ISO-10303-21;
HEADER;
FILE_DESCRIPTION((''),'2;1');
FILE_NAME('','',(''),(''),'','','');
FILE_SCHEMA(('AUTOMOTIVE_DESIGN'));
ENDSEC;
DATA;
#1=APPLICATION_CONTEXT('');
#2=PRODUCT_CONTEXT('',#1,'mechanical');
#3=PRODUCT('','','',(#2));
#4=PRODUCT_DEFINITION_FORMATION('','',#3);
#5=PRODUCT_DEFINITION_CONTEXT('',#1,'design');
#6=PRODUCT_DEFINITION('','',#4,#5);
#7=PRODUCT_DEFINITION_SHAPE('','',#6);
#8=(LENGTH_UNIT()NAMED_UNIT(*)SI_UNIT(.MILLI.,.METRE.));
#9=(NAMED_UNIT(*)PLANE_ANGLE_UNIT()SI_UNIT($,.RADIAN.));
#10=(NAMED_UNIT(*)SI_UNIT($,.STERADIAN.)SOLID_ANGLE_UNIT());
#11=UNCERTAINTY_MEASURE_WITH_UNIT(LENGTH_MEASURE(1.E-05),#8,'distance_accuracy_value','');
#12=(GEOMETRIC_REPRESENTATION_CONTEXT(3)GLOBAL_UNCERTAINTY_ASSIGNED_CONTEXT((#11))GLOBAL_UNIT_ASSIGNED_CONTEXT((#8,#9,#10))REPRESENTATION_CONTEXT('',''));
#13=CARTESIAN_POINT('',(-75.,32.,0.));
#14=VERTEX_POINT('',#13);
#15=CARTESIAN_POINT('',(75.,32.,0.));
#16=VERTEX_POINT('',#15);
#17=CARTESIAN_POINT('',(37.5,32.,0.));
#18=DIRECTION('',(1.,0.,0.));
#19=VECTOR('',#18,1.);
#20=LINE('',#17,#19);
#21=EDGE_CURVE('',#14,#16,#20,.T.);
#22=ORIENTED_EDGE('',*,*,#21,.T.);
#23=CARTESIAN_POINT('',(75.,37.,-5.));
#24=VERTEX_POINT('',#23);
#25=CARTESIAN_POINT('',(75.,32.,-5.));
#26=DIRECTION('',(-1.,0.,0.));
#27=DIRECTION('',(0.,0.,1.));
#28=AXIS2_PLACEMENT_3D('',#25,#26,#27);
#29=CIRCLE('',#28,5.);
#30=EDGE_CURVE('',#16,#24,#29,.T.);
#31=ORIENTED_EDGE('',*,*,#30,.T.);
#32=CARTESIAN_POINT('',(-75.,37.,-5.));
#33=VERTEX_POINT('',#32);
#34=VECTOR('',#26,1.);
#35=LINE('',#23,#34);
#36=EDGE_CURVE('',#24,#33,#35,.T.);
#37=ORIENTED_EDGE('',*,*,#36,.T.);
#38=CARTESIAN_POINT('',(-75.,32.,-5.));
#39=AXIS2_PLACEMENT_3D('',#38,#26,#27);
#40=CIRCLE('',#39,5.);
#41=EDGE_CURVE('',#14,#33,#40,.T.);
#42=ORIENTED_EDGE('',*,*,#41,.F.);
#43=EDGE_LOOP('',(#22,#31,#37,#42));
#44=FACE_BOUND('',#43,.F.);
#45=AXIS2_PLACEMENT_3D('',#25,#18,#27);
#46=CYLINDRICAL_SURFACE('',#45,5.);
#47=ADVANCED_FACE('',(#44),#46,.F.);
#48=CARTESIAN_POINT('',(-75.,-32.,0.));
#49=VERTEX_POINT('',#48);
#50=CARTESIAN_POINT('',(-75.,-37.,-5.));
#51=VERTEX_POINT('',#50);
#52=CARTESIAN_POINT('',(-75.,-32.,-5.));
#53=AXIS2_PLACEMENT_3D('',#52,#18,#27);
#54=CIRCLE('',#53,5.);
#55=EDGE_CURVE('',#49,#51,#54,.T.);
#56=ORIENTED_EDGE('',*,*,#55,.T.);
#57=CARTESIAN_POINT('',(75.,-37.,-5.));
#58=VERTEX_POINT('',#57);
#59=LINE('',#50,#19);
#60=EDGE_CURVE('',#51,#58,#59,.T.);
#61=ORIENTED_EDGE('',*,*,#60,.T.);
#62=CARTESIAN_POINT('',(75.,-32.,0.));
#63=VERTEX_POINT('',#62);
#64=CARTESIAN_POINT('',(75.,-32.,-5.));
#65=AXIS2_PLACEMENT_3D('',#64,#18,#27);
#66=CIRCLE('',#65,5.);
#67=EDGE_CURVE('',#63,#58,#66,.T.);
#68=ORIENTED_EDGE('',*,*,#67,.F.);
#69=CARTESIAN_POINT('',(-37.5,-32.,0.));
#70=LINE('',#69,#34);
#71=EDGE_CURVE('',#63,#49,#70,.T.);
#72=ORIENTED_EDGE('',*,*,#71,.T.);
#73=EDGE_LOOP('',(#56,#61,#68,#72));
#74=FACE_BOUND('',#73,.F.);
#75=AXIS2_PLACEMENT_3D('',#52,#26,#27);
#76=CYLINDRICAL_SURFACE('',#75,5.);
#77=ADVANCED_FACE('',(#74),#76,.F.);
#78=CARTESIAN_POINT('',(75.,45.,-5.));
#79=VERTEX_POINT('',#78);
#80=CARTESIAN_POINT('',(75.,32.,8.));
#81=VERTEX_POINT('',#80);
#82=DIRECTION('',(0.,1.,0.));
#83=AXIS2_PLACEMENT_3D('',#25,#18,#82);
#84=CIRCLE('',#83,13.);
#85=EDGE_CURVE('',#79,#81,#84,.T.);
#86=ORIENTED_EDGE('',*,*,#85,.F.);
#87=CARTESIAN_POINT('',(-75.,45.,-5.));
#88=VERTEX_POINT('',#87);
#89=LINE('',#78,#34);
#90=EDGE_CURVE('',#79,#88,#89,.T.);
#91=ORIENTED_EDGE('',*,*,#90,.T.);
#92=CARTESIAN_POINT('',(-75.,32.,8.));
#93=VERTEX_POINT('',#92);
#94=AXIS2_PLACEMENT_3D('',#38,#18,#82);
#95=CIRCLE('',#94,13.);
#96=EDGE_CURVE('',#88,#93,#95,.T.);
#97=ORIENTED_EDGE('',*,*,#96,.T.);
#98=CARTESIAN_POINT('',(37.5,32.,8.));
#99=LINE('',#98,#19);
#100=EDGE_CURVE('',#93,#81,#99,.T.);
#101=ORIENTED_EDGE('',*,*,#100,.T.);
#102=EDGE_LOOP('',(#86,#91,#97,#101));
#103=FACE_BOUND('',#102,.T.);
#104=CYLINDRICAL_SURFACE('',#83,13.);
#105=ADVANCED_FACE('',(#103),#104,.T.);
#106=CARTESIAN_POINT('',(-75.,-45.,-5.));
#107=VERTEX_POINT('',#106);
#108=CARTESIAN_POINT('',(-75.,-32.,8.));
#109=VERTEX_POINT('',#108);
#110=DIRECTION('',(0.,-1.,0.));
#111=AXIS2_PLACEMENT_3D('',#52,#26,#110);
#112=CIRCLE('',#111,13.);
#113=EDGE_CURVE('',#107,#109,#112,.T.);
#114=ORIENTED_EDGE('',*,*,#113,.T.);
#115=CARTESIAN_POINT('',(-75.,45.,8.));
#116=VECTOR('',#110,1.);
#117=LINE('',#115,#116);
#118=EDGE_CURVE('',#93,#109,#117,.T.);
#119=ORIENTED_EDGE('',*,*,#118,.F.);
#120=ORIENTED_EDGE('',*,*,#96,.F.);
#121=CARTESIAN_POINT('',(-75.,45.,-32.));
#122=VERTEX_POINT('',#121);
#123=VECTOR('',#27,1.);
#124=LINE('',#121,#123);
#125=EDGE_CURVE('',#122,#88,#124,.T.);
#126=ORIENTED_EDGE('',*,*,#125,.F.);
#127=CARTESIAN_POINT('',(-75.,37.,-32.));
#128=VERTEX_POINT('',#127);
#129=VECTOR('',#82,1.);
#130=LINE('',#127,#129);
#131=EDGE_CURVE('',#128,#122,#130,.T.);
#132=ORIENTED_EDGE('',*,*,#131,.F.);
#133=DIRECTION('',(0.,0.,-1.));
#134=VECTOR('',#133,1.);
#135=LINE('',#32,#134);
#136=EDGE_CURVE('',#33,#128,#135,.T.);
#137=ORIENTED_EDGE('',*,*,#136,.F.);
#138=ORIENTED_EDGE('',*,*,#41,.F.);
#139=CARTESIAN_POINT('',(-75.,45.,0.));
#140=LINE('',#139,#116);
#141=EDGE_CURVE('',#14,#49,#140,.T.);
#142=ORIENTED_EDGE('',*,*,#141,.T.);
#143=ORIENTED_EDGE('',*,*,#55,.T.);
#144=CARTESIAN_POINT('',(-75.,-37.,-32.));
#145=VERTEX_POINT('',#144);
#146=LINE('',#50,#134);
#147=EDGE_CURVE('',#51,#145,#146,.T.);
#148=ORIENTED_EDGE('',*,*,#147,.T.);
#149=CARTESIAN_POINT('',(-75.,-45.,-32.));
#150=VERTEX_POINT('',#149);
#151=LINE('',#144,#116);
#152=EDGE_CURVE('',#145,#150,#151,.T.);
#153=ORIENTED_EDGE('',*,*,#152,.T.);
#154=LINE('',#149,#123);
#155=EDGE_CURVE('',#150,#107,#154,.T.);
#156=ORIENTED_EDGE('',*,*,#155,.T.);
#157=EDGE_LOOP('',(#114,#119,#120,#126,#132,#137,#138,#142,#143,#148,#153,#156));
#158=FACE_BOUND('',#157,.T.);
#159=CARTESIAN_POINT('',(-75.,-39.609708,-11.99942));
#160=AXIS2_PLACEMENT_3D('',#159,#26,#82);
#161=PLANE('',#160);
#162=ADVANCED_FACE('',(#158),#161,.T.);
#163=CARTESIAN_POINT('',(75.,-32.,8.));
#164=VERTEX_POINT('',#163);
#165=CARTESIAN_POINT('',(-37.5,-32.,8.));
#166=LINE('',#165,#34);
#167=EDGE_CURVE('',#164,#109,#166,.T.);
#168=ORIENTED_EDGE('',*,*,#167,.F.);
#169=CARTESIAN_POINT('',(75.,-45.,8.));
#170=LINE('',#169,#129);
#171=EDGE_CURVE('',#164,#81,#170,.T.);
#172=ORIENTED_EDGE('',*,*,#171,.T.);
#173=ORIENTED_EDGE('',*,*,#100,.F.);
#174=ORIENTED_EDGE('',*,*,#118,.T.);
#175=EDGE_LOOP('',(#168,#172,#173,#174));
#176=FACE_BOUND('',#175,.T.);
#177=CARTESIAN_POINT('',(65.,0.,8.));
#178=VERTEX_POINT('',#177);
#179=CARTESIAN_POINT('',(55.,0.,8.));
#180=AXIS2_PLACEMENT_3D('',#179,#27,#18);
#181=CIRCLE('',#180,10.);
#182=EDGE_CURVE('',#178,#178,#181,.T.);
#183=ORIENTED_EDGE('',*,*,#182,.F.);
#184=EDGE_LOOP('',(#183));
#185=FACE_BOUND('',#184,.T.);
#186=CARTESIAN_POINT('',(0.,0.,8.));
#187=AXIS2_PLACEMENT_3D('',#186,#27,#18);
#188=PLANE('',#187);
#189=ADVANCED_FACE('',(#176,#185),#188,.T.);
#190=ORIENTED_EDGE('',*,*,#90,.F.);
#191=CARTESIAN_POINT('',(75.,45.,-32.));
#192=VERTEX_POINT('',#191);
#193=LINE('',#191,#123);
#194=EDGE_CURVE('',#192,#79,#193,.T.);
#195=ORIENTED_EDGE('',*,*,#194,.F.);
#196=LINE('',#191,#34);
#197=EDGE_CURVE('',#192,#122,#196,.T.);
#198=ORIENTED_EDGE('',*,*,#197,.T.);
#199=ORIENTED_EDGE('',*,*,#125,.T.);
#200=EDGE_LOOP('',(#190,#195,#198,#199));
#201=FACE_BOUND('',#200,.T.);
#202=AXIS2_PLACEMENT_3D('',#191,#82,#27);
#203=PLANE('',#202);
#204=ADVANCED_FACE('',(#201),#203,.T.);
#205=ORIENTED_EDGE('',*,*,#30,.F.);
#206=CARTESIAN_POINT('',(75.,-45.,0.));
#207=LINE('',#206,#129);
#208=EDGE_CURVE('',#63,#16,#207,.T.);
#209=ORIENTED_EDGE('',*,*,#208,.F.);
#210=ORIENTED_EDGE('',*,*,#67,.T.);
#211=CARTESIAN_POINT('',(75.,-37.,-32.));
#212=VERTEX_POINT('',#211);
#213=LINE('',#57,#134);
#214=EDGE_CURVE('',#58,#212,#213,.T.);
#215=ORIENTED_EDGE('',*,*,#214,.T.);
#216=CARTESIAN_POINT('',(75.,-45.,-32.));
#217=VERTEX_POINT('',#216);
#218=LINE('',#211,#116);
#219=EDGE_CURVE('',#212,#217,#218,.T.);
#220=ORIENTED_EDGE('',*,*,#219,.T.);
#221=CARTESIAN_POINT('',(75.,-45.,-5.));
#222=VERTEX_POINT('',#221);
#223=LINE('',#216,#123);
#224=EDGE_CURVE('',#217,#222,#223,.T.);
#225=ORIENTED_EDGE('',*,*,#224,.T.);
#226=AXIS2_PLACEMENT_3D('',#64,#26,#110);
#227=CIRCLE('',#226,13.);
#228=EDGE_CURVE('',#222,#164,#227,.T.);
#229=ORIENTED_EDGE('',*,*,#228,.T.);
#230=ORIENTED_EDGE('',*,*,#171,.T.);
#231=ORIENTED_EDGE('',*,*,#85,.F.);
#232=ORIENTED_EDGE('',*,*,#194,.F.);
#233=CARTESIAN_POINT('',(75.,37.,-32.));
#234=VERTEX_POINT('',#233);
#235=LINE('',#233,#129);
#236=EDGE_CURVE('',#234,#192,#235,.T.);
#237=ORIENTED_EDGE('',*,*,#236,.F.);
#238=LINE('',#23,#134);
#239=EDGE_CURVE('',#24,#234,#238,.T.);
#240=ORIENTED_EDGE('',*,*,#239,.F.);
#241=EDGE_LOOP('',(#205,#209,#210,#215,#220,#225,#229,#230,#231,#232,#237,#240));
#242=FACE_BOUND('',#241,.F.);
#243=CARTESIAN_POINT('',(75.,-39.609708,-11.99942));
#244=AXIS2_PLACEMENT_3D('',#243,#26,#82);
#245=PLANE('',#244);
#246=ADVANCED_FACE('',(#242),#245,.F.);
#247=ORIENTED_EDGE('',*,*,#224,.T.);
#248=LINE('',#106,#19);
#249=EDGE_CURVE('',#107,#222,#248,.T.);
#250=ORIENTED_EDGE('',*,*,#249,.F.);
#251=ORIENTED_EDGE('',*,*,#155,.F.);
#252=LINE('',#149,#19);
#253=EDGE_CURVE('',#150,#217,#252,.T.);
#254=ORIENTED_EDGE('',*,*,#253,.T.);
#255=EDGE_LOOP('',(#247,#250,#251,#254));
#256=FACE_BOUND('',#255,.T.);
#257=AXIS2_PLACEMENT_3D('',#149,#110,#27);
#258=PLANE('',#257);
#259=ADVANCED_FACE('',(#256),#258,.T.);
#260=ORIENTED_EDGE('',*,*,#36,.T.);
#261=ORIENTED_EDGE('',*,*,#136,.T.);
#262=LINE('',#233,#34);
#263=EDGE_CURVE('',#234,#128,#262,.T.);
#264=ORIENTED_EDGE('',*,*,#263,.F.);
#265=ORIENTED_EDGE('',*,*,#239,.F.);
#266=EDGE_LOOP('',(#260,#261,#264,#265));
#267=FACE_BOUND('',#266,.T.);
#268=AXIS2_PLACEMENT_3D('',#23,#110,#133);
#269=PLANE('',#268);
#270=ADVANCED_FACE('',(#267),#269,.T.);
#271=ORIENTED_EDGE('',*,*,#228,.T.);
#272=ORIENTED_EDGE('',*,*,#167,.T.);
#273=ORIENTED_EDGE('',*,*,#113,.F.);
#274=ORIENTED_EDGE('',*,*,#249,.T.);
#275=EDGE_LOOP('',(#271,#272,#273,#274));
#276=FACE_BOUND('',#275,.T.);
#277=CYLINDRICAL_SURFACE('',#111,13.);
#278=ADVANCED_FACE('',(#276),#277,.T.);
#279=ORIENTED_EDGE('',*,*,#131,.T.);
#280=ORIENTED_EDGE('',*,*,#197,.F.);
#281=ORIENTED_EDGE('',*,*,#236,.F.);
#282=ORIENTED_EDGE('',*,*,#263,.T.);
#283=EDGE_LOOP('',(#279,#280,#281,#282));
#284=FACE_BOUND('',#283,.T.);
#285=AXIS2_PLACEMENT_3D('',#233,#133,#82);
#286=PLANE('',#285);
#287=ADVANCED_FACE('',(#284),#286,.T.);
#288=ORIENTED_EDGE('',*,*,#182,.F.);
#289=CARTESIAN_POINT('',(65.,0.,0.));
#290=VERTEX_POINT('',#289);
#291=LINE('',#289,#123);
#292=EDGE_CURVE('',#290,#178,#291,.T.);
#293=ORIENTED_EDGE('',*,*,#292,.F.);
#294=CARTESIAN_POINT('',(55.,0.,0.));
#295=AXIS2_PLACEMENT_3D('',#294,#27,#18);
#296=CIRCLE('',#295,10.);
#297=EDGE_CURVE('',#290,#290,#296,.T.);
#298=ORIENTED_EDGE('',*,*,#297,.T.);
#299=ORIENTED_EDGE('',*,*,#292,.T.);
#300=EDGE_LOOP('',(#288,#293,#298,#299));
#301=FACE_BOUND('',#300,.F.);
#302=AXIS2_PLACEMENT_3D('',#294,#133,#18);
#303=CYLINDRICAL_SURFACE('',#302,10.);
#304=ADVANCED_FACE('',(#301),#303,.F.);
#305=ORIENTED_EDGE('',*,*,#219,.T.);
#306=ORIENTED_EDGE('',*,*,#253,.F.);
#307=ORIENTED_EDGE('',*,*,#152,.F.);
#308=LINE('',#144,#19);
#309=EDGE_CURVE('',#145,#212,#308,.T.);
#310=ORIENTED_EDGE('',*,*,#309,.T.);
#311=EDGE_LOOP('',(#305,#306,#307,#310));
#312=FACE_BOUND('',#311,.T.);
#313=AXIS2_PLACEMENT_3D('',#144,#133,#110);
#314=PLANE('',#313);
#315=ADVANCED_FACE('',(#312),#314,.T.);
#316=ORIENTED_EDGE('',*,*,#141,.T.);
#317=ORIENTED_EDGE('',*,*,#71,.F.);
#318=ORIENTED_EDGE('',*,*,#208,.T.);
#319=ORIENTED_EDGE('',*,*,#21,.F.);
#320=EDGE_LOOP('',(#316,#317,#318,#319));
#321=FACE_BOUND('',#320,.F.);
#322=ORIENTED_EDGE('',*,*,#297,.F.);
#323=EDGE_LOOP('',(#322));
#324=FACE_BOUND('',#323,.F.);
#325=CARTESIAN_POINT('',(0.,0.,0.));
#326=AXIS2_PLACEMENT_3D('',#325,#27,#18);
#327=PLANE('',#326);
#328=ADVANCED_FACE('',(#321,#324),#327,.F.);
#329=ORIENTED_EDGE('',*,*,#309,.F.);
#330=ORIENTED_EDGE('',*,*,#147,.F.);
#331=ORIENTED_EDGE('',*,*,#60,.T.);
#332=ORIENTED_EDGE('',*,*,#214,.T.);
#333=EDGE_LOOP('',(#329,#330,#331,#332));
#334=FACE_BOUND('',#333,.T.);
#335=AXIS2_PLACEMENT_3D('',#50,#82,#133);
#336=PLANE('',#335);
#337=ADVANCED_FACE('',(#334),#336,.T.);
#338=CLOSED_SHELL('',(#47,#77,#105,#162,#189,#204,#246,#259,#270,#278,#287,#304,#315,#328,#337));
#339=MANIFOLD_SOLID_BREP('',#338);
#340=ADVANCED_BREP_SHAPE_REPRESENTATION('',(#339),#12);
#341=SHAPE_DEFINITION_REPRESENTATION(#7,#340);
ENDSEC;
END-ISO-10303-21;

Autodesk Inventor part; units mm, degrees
ref_plane "YZ Plane" through (0, 0, 0) normal (1, 0, 0) x (0, 1, 0)
ref_plane "XZ Plane" through (0, 0, 0) normal (0, 1, 0) x (-1, 0, 0)
ref_plane "XY Plane" through (0, 0, 0) normal (0, 0, 1) x (1, 0, 0)
sketch "Sketch1" plane through (0, 0, 0) normal (0, 0, 1) x (1, 0, 0)
  line L0 (-75, -45) -> (75, -45)
  line L1 (75, -45) -> (75, 45)
  line L2 (75, 45) -> (-75, 45)
  line L3 (-75, 45) -> (-75, -45)
  line L4 (-75, -45) -> (75, 45) construction
  line L5 (75, -45) -> (-75, 45) construction
  circle A0 centre (55, -25) radius 10
  circle A1 centre (55, 25) radius 10
  line L6 (0, 0) -> (75, 0) construction
  circle A2 centre (55, 0) radius 10
  dimension "d0" = 150
  dimension "d1" = 90
  dimension "d23" = 20
  dimension "d25" = 20
  dimension "d26" = 20
extrude "Plate1" add sketch "Sketch1" along normal blind 8 contours L3 L2 L1 L0 | A0 | A1
sketch "Sketch6" plane through (-75, -37, 8) normal (0, -1, 0) x (1, 0, 0)
  line L0 (150, 0) -> (0, 0)
  line L1 (0, 0) -> (0, -40)
  line L2 (0, -40) -> (150, -40)
  line L3 (150, -40) -> (150, 0)
edge flange "Flange2" height 40 angle 90 thickness 8 bend radius 5 thickness toward (0, -1, 0) relief round relief width 8 relief depth 4 corner gap 5 corner form 0 edges at (0, -45, 0) (0, 45, 0) wall of the first edge with corners at (75, -37, 8) (-75, -37, 8) (-75, -37, -32) (75, -37, -32)
bend "Bend2"
corner "Corner2"
equation "\"d26\" = d25"
equation "\"d2\" = Thickness"
equation "\"d30\" = BendReliefWidth"
equation "\"d31\" = BendReliefDepth"
equation "\"d32\" = MinimumRemnant"
equation "\"d33\" = TransitionRadius"
equation "\"d36\" = BendRadius"
equation "\"d37\" = CornerReliefSize"
equation "\"d38\" = GapSize"
equation "\"d39\" = JacobiRadiusSize"
equation "\"BendReliefWidth\" = Thickness"
equation "\"BendReliefDepth\" = 0.5 * Thickness"
equation "\"CornerReliefSize\" = 4 * Thickness"
equation "\"MinimumRemnant\" = 2 * Thickness"
equation "\"TransitionRadius\" = BendRadius"
equation "\"JacobiRadiusSize\" = BendRadius"
equation "\"GapSize\" = Thickness"
equation "\"Thickness\" = 8"
equation "\"BendRadius\" = 5"
properties part number "PNS 1785 leg floor channel_1200" material "Steel"
